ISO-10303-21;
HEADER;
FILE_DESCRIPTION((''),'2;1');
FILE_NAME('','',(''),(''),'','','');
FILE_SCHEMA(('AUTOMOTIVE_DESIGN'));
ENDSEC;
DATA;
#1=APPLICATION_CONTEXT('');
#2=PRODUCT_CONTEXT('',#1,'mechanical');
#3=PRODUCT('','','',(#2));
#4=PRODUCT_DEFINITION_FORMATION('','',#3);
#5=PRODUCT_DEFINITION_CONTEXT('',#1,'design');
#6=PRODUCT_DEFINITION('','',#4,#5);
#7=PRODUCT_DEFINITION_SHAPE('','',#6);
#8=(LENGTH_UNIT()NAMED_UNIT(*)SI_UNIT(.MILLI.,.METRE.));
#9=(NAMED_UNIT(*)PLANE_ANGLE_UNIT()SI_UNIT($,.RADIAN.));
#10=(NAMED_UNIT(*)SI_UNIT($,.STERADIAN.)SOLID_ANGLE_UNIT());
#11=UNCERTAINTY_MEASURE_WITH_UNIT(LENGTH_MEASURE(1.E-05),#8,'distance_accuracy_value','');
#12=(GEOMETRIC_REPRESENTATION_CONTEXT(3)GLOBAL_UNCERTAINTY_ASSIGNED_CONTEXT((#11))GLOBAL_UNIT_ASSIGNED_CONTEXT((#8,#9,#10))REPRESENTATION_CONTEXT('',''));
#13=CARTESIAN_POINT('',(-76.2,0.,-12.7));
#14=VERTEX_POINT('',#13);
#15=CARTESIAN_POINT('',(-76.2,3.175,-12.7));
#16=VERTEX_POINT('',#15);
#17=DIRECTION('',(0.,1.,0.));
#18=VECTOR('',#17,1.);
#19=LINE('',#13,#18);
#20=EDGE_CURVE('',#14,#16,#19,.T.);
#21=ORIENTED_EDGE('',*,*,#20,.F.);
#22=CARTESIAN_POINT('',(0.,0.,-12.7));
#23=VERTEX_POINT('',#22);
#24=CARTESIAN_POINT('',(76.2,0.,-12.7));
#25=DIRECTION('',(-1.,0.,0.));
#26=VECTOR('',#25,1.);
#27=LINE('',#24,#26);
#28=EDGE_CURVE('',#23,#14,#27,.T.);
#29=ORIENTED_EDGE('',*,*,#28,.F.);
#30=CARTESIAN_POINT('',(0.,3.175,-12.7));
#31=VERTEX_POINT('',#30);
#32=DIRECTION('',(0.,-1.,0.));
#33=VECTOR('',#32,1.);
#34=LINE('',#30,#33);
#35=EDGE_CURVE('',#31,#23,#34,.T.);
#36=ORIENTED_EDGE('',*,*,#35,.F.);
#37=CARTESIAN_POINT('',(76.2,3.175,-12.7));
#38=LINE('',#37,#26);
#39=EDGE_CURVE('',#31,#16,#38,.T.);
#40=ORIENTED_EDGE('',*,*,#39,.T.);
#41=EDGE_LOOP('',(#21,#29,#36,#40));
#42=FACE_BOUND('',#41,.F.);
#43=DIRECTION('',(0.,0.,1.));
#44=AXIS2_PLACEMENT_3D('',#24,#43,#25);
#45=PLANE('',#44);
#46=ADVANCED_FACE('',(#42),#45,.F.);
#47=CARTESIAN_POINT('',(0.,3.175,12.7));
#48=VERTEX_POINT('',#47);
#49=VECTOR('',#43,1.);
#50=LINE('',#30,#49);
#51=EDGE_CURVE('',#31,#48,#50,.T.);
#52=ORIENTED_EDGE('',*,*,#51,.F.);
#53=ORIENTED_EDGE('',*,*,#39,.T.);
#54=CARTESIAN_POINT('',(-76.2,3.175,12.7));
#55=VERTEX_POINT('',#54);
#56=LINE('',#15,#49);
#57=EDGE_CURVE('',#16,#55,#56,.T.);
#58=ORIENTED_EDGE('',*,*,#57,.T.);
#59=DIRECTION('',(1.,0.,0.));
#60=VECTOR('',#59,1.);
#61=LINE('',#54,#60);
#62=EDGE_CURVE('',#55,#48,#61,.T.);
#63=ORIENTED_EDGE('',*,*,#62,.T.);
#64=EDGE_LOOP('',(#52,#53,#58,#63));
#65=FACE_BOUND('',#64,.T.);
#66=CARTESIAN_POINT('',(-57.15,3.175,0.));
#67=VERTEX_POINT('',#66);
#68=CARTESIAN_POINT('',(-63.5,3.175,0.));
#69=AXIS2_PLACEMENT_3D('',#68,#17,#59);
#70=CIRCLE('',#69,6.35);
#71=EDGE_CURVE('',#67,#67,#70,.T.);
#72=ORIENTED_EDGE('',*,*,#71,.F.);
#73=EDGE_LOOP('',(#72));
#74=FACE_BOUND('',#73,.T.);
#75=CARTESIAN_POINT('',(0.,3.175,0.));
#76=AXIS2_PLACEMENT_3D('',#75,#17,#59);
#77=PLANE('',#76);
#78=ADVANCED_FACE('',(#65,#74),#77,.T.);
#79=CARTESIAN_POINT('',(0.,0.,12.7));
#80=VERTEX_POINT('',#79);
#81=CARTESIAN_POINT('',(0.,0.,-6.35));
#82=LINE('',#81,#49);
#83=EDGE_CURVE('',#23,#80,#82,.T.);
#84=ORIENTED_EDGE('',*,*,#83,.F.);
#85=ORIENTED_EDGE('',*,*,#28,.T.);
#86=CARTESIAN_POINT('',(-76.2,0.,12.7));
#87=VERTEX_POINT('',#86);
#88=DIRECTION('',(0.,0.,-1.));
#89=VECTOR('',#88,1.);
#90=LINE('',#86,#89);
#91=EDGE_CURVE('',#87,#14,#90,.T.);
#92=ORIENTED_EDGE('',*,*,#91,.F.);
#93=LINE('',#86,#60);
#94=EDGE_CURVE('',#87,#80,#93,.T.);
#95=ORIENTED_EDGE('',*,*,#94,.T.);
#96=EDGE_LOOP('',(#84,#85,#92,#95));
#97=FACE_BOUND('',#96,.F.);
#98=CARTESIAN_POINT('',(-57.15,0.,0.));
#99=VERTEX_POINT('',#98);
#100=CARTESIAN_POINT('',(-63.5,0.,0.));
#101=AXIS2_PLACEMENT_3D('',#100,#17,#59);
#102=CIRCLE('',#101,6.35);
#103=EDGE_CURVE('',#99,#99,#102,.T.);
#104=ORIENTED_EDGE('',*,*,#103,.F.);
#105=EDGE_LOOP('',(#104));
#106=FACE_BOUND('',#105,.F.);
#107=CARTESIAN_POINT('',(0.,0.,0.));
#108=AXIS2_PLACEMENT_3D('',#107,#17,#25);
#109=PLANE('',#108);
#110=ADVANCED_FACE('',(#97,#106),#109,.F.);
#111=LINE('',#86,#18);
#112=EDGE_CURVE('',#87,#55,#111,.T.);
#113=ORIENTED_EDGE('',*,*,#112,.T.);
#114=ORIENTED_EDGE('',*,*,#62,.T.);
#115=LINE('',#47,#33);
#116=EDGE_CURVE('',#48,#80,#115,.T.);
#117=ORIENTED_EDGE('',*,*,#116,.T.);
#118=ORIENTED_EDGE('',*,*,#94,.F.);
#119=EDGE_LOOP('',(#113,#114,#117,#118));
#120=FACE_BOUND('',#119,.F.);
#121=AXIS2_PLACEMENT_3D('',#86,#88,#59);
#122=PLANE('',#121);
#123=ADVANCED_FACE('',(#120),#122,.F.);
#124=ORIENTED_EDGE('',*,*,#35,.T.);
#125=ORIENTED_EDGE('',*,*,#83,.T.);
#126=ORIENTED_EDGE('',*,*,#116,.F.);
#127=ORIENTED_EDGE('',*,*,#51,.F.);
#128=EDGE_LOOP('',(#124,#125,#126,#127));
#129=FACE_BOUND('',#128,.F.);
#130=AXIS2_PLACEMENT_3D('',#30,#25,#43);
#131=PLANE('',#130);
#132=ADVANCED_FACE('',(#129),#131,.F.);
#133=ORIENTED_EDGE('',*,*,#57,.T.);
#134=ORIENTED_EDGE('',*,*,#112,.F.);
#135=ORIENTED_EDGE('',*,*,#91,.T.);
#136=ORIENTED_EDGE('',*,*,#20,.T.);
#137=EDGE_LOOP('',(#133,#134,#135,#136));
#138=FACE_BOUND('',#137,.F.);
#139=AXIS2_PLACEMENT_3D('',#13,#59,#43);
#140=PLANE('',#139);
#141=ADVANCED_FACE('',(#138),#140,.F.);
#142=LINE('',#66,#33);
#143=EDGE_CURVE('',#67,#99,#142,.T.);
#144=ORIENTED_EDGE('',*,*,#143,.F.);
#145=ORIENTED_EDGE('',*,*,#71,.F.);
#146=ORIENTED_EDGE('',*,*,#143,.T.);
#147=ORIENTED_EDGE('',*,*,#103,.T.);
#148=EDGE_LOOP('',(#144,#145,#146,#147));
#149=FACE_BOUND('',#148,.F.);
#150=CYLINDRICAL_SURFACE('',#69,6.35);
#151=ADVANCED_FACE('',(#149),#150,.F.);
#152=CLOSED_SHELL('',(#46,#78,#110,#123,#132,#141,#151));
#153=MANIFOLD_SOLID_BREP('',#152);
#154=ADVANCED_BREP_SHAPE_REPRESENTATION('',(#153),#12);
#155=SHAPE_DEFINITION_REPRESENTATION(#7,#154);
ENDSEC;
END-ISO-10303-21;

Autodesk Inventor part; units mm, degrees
ref_plane "YZ Plane" through (0, 0, 0) normal (1, 0, 0) x (0, 1, 0)
ref_plane "XZ Plane" through (0, 0, 0) normal (0, 1, 0) x (-1, 0, 0)
ref_plane "XY Plane" through (0, 0, 0) normal (0, 0, 1) x (1, 0, 0)
sketch "Sketch1" plane through (0, 0, 0) normal (0, 1, 0) x (-1, 0, 0)
  line L0 (-76.2, -12.7) -> (76.2, -12.7)
  line L1 (76.2, -12.7) -> (76.2, 12.7)
  line L2 (76.2, 12.7) -> (-76.2, 12.7)
  line L3 (-76.2, 12.7) -> (-76.2, -12.7)
  line L4 (-76.2, -12.7) -> (76.2, 12.7) construction
  line L5 (76.2, -12.7) -> (-76.2, 12.7) construction
  line L6 (-76.2, 0) -> (-63.5, 0)
  line L7 (-76.2, 0) -> (-63.5, 0) construction
  line L8 (76.2, 0) -> (50.8, 0)
  line L9 (76.2, 0) -> (101.6, 0) construction
  line L10 (50.8, 0) -> (25.4, 0)
  circle A0 centre (-63.5, 0) radius 3.175
  circle A1 centre (25.4, 0) radius 3.175
  point P0 (0, 0)
  dimension "d0" = 152.4
  dimension "d1" = 25.4
  dimension "d2" = 12.7
  dimension "d3" = 0
  dimension "d4" = 25.4
  dimension "d5" = 180
  dimension "d6" = 25.4
  dimension "d7" = 6.35
  dimension "d8" = 6.35
extrude "Extrusion1" add sketch "Sketch1" along normal blind 3.175
sketch "Sketch2" plane through (0, 3.175, 0) normal (0, 1, 0) x (1, 0, 0)
  circle A0 centre (-63.5, 0) radius 3.175
  point P0 (0, 0)
  dimension "d11" = 6.35
extrude "Extrusion2" cut sketch "Sketch2" against normal blind 25.4
sketch "Sketch3" plane through (0, 3.175, 0) normal (0, 1, 0) x (1, 0, 0)
  circle A0 centre (-63.5, 0) radius 3.175 projected
  circle A1 centre (-63.5, 0) radius 6.35
  point P0 (0, 0)
  dimension "d14" = 12.7
extrude "Extrusion3" cut sketch "Sketch3" against normal blind 25.4
sketch "Sketch4" plane through (0, 3.175, 0) normal (0, 1, 0) x (1, 0, 0)
  circle A0 centre (63.5, 0) radius 3.175 projected
  line L0 (76.2, 12.7) -> (-76.2, 12.7) projected
  line L1 (-76.2, -12.7) -> (76.2, -12.7) projected
  line L2 (76.2, -12.7) -> (76.2, 12.7) projected
  line L3 (0, 12.7) -> (0, -12.7)
  point P0 (0, 0)
extrude "Extrusion4" cut sketch "Sketch4" against normal blind 25.4
sketch "Sketch5" plane through (0, 3.175, 0) normal (0, 1, 0) x (1, 0, 0)
  circle A0 centre (-25.4, 0) radius 3.175 projected
  circle A1 centre (-25.4, 0) radius 3.175
  point P0 (0, 0)
extrude "Extrusion5" add sketch "Sketch5" against normal blind 3.175
properties part number "BarHolder"
